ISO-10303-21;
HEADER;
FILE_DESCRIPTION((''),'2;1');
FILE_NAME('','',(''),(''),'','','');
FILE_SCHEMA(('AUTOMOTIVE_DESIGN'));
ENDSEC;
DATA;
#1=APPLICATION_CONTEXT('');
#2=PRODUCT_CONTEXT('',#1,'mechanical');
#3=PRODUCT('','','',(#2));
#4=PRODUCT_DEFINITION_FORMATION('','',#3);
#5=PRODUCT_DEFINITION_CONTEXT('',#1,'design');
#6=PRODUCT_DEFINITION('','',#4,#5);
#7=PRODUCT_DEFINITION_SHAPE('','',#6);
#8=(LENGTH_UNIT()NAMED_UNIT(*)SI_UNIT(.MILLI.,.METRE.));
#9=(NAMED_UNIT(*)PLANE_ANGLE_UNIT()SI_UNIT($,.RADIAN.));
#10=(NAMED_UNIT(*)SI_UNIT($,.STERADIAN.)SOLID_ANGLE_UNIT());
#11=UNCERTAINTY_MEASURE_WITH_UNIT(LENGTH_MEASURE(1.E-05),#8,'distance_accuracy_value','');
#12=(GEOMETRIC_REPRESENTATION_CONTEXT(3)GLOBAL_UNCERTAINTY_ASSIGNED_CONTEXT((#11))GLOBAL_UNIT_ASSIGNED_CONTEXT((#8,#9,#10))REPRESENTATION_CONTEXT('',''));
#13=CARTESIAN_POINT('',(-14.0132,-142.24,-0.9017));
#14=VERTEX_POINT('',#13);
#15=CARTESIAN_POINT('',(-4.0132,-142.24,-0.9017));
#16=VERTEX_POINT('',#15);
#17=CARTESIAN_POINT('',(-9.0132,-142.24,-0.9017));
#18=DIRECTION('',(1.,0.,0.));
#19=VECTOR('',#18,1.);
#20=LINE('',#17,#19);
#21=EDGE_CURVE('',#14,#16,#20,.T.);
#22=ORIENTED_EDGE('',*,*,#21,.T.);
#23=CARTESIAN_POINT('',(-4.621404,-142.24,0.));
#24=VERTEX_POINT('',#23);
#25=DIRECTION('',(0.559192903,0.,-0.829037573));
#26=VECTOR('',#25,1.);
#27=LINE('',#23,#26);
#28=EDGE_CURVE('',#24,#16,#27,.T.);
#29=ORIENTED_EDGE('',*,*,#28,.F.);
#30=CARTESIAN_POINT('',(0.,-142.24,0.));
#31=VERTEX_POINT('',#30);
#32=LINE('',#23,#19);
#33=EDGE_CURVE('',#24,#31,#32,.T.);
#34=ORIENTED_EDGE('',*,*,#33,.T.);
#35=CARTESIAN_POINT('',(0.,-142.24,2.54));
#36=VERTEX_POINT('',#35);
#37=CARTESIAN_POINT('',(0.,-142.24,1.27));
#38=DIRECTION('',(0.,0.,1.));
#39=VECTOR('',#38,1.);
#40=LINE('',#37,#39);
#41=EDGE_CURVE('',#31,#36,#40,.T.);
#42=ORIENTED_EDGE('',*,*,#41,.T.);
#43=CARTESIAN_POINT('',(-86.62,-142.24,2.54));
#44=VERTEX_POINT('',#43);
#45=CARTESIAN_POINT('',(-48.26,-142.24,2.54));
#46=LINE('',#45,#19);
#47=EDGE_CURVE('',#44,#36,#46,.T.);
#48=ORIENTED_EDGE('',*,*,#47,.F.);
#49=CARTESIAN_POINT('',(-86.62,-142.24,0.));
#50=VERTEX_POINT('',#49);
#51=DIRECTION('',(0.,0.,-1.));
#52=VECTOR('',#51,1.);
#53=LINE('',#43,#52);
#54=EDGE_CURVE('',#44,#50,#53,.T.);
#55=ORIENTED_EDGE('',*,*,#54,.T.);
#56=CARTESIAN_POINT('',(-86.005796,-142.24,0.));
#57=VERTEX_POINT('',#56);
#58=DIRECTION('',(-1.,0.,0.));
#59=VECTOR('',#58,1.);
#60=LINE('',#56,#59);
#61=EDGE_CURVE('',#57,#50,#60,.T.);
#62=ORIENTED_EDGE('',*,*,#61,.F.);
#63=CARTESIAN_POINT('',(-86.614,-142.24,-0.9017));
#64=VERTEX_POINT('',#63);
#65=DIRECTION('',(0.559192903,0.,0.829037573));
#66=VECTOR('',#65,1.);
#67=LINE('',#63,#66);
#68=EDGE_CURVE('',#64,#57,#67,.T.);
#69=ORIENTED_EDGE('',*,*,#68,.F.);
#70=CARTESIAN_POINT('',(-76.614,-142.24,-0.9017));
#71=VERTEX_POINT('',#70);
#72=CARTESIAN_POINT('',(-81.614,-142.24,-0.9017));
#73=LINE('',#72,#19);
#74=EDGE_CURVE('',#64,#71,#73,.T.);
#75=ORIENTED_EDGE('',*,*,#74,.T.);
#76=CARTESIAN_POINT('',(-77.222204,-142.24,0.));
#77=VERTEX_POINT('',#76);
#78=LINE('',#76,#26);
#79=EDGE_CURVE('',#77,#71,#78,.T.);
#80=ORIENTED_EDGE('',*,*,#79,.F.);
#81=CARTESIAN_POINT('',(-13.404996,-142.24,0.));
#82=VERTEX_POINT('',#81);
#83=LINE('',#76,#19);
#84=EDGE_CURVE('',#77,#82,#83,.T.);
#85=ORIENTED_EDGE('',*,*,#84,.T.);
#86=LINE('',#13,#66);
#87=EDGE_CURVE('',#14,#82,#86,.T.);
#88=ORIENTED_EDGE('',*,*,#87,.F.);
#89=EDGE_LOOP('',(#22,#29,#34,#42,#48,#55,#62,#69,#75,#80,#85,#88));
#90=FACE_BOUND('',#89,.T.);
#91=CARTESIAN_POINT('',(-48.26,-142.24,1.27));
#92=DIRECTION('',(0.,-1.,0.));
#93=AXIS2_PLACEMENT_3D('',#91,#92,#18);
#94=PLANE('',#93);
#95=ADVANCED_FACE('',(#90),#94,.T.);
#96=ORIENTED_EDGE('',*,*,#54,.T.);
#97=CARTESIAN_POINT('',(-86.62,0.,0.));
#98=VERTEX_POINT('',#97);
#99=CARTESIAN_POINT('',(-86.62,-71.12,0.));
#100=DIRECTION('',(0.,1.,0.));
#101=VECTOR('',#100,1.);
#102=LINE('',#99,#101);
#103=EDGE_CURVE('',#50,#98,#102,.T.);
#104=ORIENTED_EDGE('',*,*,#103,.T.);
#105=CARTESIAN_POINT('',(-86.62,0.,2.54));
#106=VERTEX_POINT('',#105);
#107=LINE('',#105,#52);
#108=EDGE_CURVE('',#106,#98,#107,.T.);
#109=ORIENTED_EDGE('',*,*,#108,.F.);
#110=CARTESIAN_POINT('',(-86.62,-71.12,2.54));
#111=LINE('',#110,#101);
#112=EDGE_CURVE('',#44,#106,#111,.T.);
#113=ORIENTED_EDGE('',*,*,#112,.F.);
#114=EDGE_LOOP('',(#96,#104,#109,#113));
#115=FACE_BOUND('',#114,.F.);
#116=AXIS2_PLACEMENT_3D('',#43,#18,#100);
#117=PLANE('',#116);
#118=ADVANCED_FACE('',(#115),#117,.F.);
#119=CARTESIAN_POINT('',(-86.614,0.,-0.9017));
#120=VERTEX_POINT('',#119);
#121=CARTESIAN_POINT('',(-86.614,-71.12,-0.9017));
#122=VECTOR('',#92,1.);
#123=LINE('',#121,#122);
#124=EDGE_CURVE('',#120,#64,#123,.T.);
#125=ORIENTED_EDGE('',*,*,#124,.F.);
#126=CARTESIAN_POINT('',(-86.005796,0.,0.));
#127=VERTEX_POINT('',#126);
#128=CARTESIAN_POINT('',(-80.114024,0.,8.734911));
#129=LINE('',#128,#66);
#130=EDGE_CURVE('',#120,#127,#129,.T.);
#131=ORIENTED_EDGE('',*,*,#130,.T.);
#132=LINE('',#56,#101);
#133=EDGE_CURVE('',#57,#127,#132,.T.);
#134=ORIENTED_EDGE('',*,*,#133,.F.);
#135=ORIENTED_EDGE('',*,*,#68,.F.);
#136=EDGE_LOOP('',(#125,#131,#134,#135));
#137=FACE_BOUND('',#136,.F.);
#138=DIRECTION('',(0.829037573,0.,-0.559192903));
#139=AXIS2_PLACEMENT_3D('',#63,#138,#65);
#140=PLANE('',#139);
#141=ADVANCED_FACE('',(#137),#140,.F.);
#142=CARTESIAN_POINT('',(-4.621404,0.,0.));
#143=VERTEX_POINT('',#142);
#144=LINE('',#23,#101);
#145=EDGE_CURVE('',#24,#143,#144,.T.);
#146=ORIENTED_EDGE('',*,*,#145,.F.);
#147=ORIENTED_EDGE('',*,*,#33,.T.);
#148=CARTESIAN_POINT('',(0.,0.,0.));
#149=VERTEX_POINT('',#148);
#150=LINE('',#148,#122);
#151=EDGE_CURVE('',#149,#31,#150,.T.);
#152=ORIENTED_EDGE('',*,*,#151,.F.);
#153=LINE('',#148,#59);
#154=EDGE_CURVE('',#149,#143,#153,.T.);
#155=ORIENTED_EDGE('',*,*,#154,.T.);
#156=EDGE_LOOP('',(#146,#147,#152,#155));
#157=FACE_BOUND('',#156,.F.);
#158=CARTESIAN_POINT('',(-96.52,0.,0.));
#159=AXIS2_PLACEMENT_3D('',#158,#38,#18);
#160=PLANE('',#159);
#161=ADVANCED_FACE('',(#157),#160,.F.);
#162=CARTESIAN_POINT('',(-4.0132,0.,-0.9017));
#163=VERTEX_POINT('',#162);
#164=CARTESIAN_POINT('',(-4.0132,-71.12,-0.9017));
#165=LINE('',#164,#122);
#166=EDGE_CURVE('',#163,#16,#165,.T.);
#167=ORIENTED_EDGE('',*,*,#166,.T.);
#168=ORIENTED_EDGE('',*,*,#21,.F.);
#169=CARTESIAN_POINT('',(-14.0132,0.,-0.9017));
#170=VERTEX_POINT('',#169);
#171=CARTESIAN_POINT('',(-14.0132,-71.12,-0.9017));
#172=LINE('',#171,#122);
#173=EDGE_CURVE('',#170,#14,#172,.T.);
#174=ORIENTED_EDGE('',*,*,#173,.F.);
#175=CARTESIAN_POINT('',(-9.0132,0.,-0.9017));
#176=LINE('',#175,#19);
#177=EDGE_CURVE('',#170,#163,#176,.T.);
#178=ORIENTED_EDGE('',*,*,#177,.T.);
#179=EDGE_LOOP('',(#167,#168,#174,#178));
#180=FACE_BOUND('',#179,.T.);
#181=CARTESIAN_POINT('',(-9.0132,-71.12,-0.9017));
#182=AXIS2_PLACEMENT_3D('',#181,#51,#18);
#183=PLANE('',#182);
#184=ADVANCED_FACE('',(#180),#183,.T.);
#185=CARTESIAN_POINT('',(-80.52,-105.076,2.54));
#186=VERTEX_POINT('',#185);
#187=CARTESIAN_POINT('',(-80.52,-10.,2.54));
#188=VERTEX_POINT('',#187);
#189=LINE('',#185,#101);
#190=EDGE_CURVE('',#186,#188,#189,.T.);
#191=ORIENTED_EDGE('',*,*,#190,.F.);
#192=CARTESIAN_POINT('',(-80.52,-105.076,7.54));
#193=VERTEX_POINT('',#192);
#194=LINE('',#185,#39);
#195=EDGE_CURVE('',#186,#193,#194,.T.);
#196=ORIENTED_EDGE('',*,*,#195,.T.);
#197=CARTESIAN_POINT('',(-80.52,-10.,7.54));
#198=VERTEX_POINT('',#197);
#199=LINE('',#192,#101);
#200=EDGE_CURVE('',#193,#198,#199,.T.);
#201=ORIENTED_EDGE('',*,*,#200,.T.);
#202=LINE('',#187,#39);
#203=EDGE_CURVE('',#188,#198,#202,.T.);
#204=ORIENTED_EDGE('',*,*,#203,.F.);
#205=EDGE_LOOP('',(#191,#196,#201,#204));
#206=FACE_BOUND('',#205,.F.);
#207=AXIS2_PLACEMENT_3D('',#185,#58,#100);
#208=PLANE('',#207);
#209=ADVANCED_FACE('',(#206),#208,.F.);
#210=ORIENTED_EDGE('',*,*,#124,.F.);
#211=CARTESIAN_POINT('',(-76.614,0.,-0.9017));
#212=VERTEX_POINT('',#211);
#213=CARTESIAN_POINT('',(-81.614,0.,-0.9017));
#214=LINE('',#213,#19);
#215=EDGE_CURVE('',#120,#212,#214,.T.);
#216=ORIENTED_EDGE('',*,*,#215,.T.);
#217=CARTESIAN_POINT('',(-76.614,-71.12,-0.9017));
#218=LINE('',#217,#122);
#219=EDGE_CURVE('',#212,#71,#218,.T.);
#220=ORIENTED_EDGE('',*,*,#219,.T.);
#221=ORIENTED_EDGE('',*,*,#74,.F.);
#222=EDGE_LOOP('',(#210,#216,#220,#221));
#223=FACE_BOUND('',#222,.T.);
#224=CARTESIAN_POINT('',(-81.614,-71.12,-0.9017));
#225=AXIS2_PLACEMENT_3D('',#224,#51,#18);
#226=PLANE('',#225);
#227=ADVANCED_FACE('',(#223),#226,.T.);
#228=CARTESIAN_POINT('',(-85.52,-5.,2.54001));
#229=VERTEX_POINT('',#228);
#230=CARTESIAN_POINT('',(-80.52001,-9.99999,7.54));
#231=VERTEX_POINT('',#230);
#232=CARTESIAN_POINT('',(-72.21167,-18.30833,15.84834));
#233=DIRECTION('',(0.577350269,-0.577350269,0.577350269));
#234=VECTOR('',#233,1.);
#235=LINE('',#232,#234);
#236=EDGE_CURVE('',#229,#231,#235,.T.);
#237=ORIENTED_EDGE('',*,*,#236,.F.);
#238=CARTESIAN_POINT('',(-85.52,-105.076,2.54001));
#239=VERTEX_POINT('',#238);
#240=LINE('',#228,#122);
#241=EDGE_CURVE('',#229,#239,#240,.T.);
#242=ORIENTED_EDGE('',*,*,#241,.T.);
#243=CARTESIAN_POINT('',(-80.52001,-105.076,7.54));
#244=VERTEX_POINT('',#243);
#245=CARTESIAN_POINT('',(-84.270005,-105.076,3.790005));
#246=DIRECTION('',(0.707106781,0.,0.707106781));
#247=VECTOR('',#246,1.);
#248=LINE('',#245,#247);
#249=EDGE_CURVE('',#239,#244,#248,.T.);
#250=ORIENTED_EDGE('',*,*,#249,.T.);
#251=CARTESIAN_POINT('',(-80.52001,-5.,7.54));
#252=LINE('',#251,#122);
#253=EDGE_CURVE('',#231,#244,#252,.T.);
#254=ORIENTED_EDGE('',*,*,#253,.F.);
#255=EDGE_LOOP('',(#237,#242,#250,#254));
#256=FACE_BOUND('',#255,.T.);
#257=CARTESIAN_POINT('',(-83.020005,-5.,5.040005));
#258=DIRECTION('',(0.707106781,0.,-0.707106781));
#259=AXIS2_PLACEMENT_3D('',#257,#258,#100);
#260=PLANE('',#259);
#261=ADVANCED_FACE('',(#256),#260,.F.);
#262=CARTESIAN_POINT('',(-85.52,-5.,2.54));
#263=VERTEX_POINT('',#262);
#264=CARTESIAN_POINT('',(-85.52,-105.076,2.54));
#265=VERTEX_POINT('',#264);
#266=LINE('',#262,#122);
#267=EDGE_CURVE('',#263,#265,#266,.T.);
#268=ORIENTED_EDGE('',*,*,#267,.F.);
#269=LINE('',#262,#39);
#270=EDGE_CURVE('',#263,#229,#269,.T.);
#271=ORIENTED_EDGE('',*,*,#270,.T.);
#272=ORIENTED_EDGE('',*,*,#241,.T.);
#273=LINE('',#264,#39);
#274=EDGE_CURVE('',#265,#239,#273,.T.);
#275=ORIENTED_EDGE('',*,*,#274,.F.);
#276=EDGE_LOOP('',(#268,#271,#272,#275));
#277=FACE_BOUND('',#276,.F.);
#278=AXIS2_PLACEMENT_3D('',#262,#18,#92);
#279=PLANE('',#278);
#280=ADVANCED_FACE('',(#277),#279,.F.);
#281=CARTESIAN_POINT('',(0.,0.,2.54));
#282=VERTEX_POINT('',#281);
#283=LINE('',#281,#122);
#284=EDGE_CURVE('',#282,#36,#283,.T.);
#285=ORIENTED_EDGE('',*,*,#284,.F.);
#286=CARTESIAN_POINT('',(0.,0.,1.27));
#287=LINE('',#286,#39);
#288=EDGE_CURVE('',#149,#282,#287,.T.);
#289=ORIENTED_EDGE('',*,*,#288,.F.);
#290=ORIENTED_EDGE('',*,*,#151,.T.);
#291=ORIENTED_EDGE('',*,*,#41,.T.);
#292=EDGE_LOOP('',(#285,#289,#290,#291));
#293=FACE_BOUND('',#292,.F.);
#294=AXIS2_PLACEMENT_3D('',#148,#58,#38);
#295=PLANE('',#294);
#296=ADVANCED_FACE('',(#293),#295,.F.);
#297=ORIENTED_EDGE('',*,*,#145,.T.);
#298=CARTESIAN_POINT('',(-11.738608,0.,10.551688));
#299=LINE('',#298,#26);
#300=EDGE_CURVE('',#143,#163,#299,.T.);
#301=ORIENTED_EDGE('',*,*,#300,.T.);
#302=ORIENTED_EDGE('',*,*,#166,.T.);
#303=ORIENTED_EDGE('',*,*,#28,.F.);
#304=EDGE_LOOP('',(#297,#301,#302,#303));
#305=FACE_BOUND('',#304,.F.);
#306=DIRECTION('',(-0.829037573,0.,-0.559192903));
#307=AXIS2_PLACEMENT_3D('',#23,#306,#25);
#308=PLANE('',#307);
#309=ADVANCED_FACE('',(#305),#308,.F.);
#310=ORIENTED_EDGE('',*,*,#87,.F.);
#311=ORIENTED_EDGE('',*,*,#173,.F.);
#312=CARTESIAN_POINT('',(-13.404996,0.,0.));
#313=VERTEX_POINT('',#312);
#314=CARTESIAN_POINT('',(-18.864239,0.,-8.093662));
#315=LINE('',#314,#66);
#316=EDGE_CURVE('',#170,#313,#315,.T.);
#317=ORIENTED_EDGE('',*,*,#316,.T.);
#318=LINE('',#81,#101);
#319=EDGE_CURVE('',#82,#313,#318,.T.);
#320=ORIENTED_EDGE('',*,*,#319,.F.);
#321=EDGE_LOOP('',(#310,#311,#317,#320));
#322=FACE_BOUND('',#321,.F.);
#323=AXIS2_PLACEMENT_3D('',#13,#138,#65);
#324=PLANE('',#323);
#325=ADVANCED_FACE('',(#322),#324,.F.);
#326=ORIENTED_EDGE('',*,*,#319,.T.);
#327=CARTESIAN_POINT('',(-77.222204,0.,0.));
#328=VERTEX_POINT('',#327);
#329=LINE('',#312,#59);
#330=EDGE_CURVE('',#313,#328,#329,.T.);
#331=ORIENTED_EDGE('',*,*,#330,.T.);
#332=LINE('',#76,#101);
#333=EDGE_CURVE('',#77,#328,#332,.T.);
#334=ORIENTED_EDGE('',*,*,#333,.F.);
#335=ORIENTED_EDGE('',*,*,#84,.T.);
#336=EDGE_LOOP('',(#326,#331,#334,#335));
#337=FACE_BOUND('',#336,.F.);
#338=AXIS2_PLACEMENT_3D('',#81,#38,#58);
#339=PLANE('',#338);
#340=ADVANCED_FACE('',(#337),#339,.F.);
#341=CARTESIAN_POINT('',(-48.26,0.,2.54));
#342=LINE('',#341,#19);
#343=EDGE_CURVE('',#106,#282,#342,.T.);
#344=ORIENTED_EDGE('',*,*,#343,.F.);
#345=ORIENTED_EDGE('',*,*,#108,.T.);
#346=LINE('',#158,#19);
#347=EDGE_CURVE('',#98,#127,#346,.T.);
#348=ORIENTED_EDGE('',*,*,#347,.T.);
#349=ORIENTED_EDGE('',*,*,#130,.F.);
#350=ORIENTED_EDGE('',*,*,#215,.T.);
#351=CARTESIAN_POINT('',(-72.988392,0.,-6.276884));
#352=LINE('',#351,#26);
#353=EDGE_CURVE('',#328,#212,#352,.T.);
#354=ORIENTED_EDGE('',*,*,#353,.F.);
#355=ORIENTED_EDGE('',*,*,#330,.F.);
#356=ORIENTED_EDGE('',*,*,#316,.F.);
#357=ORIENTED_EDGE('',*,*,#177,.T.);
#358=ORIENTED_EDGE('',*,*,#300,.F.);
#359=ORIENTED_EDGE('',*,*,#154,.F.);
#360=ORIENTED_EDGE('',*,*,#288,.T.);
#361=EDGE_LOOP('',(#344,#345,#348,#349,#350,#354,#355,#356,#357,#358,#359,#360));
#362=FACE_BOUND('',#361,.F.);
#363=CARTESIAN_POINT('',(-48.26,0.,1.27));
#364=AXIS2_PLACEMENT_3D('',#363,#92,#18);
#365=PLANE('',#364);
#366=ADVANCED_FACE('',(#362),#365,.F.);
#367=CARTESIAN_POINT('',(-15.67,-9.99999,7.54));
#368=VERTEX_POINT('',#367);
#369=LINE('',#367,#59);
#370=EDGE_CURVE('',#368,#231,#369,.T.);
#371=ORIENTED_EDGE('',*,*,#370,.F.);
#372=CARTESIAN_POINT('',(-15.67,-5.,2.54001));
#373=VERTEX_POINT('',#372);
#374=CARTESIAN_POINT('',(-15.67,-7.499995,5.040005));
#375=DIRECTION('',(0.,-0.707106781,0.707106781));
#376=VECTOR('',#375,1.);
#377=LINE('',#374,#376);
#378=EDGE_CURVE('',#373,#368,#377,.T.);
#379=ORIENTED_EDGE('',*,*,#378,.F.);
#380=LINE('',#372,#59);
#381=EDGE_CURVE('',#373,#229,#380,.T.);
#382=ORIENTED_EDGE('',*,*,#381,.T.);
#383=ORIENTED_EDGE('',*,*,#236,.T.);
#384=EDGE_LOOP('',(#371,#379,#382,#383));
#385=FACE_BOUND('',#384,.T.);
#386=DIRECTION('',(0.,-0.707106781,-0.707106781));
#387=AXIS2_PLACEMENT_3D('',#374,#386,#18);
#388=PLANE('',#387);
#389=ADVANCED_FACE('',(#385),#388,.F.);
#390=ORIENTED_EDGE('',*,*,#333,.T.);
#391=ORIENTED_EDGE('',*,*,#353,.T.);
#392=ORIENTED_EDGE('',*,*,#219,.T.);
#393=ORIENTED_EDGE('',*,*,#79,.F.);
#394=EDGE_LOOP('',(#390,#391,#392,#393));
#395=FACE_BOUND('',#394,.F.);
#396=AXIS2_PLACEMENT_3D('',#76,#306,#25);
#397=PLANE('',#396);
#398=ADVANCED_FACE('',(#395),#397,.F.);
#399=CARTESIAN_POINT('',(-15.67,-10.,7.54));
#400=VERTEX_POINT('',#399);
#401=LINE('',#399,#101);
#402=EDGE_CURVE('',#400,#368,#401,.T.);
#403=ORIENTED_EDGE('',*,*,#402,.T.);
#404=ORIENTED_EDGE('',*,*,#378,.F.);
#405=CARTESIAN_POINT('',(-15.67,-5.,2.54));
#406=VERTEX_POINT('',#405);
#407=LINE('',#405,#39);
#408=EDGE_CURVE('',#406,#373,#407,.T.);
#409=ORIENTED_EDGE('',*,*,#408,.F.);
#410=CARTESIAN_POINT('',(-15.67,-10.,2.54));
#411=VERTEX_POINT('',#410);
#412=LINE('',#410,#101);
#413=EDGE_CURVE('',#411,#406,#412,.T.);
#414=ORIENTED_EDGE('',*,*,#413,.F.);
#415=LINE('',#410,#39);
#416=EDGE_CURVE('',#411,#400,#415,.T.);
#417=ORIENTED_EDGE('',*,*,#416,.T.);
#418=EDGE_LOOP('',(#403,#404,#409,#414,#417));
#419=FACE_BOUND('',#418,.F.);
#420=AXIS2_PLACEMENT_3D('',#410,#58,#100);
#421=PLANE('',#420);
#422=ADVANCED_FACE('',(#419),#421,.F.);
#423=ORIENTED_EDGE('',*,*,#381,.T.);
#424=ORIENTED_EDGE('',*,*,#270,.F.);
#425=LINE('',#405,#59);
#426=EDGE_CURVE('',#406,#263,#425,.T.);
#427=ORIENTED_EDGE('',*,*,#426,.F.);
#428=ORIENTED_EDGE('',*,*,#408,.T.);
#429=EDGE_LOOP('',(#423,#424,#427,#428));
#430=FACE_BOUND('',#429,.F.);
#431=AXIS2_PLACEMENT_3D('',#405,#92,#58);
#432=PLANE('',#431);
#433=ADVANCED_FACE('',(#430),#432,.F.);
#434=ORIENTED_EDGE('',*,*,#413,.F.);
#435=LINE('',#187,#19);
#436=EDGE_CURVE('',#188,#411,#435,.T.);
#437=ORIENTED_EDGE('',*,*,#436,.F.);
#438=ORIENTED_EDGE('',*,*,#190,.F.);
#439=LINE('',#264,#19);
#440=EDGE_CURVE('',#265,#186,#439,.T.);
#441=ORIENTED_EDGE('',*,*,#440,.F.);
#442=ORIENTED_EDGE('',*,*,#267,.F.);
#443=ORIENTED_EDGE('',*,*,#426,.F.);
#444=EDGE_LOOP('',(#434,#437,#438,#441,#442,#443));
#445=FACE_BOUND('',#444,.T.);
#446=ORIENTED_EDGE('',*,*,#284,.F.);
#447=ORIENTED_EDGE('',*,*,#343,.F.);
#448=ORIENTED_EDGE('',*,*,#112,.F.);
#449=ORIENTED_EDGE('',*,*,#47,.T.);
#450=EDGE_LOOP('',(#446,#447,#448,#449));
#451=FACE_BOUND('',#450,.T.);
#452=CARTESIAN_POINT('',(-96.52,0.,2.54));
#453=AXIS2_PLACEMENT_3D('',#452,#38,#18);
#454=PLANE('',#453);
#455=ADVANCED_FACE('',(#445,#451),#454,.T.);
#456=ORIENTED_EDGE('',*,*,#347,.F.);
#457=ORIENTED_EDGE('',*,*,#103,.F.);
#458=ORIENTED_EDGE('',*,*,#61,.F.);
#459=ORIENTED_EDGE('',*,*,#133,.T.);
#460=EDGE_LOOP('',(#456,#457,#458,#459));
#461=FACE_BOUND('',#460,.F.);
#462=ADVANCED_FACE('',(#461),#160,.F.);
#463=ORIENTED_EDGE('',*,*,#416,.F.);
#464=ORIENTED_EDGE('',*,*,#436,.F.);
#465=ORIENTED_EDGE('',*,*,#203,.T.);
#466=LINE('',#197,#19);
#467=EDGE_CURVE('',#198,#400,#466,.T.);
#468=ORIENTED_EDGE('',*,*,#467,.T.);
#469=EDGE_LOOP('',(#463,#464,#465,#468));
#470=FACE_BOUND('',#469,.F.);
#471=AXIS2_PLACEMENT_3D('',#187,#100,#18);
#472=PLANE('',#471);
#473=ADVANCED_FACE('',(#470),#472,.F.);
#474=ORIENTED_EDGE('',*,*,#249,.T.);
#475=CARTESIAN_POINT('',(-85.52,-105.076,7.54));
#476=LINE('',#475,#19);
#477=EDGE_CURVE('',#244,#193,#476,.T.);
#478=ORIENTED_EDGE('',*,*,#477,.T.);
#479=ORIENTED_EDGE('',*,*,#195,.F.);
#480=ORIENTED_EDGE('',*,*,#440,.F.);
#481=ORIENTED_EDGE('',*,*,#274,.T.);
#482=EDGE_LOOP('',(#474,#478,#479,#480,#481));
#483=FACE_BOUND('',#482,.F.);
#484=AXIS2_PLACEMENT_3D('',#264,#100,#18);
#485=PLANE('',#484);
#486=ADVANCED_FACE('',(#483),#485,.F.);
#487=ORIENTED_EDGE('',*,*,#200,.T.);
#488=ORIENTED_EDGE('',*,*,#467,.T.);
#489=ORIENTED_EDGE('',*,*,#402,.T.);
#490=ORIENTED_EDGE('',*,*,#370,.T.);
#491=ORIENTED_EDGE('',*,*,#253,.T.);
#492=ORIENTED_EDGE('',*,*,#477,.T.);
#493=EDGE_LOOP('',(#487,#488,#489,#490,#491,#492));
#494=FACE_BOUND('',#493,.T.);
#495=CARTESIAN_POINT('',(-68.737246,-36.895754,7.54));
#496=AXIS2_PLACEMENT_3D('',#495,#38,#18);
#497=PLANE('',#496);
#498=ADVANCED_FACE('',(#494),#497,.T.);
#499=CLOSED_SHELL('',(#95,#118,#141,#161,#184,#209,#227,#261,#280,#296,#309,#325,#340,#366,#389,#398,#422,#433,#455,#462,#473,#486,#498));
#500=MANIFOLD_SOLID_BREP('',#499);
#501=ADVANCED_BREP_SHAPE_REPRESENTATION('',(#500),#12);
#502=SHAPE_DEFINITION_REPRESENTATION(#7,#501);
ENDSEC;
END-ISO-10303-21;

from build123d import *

# Parameters (mm, degrees)
F0_W      = 96.52
F0_H      = 2.54
F1_DEPTH  = 142.24
F2_W      = 10
F2_H      = 142.24
F3_DEPTH  = 0.9017
F5_DEPTH  = 142.241
F8_DEPTH  = 5
F9_SIZE   = 4.99999
F10_W     = 9.9
F10_H     = 142.24
F11_DEPTH = 3.4427


# Not quite as in the source:
# - a fillet or chamfer is up to 0.001 mm smaller than in the source, because OpenCascade refuses the exact size


with BuildPart() as f1:
    # F0 (on Front) → F1 (new body)
    with BuildSketch(Plane.XZ):
        with Locations((-48.26, 1.27)):
            Rectangle(F0_W, F0_H)
    extrude(amount=F1_DEPTH)

    # F2 (on face) → F3 (join)
    with BuildSketch(Plane(origin=(0, 0, 0), x_dir=(1, 0, 0), z_dir=(0, 0, -1))):
        with Locations((-81.614, 71.12)):
            Rectangle(F2_W, F2_H)
        with Locations((-9.0132, 71.12)):
            Rectangle(F2_W, F2_H)
    extrude(amount=F3_DEPTH)

    # F4 (on face) → F5 (cut, through all)
    with BuildSketch(Plane.XZ.offset(142.24)):
        Polygon((-86.614, 0), (-86.614, -0.9017), (-86.0057956704, 0), align=None)
        Polygon((-77.2222043296, 0), (-76.614, -0.9017), (-76.614, 0), align=None)
        Polygon((-14.0132, 0), (-14.0132, -0.9017), (-13.4049956704, 0), align=None)
        Polygon((-4.6214043296, 0), (-4.0132, -0.9017), (-4.0132, 0), align=None)
    extrude(amount=-F5_DEPTH, mode=Mode.SUBTRACT)

    # F7 (on face) → F8 (join)
    with BuildSketch(Plane.XY.offset(2.54)):
        Polygon((-15.67, -5), (-85.52, -5), (-85.52, -105.076), (-80.52, -105.076), (-80.52, -10), (-15.67, -10), align=None)
    extrude(amount=F8_DEPTH)

    # F9 (size 5 in the source; OpenCascade refuses exactly that, so slightly less here)
    f9_edges = [f1.edges().sort_by_distance(p)[0] for p in [
        (-85.52, -55.038, 7.54),
        (-50.595, -5, 7.54),
    ]]
    chamfer(f9_edges, length=F9_SIZE)

    # F10 (on face) → F11 (cut, through all)
    with BuildSketch(Plane.XY.offset(2.54)):
        with Locations((-91.57, -71.12)):
            Rectangle(F10_W, F10_H)
    extrude(amount=-F11_DEPTH, mode=Mode.SUBTRACT)


solid = f1.part
